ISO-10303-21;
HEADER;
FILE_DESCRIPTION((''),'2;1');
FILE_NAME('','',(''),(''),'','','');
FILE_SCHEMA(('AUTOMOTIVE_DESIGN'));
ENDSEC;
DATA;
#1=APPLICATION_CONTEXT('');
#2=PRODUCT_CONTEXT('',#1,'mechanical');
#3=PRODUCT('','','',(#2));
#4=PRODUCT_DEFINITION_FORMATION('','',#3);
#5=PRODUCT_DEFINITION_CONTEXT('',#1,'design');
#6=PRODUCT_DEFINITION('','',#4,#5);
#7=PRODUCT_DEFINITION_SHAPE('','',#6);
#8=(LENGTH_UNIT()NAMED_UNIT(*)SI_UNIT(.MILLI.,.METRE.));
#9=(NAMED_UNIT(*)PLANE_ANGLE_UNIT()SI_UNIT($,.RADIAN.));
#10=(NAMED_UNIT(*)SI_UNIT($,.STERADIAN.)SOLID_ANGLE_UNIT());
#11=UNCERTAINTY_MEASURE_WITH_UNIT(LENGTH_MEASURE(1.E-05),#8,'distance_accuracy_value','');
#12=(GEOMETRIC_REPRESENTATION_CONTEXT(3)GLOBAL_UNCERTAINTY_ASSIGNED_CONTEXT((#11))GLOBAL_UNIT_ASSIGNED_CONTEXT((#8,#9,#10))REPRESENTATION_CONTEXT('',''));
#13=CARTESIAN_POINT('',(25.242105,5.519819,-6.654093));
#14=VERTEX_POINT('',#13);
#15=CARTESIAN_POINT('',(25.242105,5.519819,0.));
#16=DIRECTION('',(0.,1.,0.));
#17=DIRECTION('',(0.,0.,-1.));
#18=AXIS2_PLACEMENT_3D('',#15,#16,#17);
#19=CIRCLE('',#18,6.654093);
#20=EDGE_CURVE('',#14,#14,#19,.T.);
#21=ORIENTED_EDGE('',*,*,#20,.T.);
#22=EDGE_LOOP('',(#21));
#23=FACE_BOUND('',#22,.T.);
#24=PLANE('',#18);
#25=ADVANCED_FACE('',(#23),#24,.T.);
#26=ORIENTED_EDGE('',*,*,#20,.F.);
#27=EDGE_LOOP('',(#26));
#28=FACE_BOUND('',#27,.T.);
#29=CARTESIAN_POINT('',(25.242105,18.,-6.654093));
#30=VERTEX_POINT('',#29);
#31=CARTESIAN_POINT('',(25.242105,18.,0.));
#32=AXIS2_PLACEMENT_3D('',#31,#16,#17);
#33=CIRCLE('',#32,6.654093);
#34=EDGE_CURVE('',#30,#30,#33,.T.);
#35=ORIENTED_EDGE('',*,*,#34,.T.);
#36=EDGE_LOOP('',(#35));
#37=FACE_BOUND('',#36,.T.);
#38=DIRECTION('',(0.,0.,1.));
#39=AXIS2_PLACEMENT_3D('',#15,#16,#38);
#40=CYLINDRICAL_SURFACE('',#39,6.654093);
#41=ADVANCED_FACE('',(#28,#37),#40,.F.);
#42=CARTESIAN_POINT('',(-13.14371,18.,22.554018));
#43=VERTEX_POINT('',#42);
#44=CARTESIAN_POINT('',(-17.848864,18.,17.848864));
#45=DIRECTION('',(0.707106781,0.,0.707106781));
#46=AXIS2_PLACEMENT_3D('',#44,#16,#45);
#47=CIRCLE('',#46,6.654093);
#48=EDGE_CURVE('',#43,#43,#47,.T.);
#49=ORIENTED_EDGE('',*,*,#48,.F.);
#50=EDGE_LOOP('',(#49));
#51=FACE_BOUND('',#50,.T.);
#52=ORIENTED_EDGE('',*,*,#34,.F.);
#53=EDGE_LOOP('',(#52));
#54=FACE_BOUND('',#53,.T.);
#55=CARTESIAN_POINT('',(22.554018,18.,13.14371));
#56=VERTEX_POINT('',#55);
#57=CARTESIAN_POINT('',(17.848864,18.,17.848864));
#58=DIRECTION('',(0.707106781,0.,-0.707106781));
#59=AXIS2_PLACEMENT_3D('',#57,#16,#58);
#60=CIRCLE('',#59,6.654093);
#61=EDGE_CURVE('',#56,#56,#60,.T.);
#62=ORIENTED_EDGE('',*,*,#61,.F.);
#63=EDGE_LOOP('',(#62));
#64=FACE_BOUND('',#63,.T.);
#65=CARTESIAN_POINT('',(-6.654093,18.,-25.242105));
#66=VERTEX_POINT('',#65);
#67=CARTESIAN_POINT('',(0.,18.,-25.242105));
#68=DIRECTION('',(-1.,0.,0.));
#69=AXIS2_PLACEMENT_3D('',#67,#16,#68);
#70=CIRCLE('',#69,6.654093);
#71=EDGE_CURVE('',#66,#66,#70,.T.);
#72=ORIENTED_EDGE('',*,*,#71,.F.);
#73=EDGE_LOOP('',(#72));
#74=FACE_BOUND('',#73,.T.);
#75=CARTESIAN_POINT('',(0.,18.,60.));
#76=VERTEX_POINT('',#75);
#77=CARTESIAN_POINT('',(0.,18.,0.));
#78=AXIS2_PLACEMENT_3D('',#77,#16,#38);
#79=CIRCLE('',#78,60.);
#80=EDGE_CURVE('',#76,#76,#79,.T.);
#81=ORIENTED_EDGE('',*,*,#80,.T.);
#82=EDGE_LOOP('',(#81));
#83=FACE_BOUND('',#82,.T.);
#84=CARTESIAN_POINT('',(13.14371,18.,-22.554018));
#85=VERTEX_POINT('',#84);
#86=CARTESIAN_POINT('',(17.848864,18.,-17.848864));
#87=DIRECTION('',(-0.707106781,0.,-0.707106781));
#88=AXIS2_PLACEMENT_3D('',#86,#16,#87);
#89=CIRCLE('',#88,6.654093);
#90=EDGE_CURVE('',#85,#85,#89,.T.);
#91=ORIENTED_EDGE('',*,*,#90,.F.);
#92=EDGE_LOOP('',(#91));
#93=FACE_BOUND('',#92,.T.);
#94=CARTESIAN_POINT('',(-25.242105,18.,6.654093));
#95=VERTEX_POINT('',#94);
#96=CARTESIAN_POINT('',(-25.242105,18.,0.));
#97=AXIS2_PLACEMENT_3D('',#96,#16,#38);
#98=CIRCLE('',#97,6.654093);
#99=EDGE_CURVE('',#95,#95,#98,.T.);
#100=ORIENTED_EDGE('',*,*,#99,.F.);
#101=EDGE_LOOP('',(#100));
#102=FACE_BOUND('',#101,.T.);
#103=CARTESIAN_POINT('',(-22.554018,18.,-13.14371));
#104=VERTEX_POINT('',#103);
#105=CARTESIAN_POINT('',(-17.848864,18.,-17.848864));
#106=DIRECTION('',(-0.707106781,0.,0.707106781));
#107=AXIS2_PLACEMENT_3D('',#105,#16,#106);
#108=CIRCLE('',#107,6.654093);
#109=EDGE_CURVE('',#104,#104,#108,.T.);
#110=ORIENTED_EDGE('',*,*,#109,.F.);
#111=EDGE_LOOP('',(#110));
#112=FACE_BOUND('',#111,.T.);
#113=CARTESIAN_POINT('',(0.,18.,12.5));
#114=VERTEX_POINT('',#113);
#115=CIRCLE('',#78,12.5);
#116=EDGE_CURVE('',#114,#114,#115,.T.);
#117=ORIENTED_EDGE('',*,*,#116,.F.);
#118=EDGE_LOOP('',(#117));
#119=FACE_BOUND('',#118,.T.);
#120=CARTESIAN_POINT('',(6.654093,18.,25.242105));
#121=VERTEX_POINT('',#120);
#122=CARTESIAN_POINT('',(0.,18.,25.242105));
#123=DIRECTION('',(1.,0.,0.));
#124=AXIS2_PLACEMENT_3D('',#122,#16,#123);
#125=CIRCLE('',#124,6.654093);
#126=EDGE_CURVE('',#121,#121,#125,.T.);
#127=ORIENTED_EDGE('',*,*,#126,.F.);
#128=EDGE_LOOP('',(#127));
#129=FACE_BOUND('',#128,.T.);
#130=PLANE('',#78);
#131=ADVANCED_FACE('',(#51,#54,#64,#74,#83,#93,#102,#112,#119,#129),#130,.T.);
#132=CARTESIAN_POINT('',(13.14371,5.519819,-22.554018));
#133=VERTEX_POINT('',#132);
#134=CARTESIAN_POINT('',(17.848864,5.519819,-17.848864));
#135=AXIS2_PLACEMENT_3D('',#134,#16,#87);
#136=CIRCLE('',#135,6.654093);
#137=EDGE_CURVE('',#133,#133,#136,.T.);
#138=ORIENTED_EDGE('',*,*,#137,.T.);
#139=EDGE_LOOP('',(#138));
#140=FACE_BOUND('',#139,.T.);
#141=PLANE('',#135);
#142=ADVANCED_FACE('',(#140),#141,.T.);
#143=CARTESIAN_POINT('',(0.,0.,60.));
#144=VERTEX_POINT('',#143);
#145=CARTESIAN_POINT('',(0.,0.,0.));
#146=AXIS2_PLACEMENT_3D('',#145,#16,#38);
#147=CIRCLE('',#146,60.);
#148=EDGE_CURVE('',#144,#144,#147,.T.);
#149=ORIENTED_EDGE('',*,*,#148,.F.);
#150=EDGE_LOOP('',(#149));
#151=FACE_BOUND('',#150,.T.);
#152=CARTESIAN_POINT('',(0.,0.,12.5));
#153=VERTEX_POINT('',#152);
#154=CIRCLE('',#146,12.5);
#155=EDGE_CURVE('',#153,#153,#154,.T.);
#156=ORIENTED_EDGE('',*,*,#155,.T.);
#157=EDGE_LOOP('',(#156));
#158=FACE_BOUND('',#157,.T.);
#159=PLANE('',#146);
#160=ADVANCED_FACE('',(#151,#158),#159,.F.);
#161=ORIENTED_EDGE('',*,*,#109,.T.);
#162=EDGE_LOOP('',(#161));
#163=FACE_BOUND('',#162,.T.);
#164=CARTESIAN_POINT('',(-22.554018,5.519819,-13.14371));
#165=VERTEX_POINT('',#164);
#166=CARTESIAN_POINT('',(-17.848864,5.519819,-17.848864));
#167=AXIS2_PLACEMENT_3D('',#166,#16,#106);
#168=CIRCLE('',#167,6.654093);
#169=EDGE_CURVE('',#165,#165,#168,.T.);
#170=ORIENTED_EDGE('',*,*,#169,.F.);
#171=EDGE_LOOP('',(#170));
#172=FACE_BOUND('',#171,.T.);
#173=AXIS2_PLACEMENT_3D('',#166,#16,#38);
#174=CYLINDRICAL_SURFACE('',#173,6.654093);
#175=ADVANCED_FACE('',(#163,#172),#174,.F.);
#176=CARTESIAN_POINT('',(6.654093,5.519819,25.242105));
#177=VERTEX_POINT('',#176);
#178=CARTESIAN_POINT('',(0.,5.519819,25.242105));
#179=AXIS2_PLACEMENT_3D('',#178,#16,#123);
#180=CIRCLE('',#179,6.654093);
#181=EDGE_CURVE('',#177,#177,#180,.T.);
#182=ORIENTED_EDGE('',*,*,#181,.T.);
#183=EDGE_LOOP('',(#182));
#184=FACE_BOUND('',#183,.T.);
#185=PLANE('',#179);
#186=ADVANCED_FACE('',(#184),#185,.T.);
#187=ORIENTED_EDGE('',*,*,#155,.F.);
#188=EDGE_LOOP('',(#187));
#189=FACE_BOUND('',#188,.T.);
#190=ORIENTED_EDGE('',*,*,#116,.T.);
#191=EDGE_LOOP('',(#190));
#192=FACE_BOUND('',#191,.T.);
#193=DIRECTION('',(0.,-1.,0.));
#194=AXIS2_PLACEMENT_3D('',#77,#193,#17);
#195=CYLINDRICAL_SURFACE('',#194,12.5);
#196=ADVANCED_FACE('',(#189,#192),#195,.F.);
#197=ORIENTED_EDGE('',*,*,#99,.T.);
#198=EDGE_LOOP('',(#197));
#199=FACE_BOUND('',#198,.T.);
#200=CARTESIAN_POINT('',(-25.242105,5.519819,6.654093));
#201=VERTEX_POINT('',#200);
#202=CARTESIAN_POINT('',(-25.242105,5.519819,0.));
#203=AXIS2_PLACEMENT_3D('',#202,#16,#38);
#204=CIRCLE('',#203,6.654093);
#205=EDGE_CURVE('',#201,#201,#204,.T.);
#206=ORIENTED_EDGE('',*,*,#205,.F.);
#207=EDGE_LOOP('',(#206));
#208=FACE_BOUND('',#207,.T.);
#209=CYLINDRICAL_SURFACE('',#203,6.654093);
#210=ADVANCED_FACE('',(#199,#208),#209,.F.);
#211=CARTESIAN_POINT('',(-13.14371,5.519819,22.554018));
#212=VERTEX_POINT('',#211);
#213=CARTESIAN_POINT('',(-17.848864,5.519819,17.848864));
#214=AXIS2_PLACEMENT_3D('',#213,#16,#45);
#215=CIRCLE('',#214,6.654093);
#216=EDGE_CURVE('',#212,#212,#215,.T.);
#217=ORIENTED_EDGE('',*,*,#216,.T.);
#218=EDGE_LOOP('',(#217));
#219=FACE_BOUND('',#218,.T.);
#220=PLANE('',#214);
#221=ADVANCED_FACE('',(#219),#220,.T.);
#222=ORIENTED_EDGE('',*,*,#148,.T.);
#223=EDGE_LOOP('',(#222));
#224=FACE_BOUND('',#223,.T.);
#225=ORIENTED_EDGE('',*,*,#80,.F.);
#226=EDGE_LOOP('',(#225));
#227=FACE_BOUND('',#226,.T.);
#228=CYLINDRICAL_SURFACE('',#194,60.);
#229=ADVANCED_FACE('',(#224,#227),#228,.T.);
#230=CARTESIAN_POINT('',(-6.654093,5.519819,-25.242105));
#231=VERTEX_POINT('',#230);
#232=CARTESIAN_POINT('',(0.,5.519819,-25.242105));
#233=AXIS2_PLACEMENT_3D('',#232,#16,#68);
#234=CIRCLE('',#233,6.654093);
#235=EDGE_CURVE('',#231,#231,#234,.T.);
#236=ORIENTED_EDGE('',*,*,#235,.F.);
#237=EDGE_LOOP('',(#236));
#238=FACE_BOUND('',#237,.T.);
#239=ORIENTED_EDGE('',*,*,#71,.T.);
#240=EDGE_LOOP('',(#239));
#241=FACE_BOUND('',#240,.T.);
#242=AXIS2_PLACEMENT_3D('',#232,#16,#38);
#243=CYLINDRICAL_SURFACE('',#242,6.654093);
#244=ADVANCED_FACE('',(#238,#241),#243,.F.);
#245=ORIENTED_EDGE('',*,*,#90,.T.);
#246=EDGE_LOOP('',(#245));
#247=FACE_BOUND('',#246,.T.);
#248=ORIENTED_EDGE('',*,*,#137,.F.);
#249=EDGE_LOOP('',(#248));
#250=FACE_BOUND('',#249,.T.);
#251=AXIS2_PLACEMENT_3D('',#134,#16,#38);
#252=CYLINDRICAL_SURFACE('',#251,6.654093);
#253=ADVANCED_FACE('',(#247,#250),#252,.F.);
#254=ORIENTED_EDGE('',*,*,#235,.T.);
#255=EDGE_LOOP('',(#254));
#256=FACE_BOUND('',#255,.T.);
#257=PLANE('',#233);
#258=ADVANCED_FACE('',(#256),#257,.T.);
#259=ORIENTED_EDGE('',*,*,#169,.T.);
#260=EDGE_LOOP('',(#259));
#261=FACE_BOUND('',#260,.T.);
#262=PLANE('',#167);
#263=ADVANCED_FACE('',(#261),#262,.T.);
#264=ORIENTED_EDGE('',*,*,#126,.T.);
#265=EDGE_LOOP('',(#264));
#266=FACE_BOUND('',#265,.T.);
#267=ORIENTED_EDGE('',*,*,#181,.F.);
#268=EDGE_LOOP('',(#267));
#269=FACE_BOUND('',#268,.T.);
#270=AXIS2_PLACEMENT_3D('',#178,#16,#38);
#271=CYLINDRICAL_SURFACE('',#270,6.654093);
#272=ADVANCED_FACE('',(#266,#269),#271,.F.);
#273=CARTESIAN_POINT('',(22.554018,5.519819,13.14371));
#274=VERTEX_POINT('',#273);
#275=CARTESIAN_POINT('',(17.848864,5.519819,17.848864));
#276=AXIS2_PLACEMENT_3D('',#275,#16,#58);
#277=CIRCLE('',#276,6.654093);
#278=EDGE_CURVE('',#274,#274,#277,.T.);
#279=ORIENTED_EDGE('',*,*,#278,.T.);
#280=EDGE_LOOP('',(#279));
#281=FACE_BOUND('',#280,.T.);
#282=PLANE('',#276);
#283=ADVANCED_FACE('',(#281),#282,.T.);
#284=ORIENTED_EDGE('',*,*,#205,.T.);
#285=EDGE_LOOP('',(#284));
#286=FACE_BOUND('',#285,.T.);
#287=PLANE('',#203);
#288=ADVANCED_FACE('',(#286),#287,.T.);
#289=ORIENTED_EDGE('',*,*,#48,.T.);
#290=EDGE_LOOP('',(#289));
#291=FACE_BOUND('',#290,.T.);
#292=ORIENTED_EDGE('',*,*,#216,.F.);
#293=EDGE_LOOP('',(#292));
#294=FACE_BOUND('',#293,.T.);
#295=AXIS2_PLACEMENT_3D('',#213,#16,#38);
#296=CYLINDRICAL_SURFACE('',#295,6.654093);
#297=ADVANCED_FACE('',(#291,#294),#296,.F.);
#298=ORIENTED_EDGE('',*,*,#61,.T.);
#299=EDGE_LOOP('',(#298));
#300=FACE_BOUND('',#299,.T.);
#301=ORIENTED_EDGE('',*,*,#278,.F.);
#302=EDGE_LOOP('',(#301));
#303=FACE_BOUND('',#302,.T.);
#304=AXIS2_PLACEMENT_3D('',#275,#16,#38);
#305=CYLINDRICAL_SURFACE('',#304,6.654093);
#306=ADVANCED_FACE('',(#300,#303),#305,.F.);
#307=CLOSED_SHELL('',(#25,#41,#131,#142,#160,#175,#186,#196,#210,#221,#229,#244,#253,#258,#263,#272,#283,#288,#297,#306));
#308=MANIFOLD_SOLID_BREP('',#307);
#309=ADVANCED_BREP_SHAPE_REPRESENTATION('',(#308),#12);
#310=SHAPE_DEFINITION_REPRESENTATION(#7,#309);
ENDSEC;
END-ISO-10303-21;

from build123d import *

# Parameters (mm, degrees)
SKETCH1_R           = 60
BOSS_EXTRUDE1_DEPTH = 18
SKETCH2_R           = 12.5
CUT_EXTRUDE1_DEPTH  = 87.740993769
SKETCH3_R           = 6.654092803
CUT_EXTRUDE2_DEPTH  = 12.480180751
CIRPATTERN1_COUNT   = 8


with BuildPart() as part:
    # Sketch1 → Boss-Extrude1 (new body)
    with BuildSketch(Plane(origin=(0, 0, 0), x_dir=(1, 0, 0), z_dir=(0, 1, 0))):
        Circle(SKETCH1_R)
    extrude(amount=BOSS_EXTRUDE1_DEPTH)

    # Sketch2 → Cut-Extrude1 (cut, through all)
    with BuildSketch(Plane(origin=(0, 0, 0), x_dir=(1, 0, 0), z_dir=(0, 1, 0))):
        Circle(SKETCH2_R)
    extrude(amount=CUT_EXTRUDE1_DEPTH, mode=Mode.SUBTRACT)

    # Sketch3 → Cut-Extrude2 (cut)
    with BuildSketch(Plane(origin=(0, 18, 0), x_dir=(1, 0, 0), z_dir=(0, 1, 0))):
        with Locations((-25.242105276, 0)):
            Circle(SKETCH3_R)
    cut_extrude2 = extrude(amount=-CUT_EXTRUDE2_DEPTH, mode=Mode.SUBTRACT)

    # CirPattern1: Cut-Extrude2 ×8 about axis
    cirpattern1_axis = Axis((0, 0, 0), (0, 1, 0))
    for i in range(1, CIRPATTERN1_COUNT):
        add(cut_extrude2.rotate(cirpattern1_axis, i * 360 / CIRPATTERN1_COUNT), mode=Mode.SUBTRACT)


solid = part.part
